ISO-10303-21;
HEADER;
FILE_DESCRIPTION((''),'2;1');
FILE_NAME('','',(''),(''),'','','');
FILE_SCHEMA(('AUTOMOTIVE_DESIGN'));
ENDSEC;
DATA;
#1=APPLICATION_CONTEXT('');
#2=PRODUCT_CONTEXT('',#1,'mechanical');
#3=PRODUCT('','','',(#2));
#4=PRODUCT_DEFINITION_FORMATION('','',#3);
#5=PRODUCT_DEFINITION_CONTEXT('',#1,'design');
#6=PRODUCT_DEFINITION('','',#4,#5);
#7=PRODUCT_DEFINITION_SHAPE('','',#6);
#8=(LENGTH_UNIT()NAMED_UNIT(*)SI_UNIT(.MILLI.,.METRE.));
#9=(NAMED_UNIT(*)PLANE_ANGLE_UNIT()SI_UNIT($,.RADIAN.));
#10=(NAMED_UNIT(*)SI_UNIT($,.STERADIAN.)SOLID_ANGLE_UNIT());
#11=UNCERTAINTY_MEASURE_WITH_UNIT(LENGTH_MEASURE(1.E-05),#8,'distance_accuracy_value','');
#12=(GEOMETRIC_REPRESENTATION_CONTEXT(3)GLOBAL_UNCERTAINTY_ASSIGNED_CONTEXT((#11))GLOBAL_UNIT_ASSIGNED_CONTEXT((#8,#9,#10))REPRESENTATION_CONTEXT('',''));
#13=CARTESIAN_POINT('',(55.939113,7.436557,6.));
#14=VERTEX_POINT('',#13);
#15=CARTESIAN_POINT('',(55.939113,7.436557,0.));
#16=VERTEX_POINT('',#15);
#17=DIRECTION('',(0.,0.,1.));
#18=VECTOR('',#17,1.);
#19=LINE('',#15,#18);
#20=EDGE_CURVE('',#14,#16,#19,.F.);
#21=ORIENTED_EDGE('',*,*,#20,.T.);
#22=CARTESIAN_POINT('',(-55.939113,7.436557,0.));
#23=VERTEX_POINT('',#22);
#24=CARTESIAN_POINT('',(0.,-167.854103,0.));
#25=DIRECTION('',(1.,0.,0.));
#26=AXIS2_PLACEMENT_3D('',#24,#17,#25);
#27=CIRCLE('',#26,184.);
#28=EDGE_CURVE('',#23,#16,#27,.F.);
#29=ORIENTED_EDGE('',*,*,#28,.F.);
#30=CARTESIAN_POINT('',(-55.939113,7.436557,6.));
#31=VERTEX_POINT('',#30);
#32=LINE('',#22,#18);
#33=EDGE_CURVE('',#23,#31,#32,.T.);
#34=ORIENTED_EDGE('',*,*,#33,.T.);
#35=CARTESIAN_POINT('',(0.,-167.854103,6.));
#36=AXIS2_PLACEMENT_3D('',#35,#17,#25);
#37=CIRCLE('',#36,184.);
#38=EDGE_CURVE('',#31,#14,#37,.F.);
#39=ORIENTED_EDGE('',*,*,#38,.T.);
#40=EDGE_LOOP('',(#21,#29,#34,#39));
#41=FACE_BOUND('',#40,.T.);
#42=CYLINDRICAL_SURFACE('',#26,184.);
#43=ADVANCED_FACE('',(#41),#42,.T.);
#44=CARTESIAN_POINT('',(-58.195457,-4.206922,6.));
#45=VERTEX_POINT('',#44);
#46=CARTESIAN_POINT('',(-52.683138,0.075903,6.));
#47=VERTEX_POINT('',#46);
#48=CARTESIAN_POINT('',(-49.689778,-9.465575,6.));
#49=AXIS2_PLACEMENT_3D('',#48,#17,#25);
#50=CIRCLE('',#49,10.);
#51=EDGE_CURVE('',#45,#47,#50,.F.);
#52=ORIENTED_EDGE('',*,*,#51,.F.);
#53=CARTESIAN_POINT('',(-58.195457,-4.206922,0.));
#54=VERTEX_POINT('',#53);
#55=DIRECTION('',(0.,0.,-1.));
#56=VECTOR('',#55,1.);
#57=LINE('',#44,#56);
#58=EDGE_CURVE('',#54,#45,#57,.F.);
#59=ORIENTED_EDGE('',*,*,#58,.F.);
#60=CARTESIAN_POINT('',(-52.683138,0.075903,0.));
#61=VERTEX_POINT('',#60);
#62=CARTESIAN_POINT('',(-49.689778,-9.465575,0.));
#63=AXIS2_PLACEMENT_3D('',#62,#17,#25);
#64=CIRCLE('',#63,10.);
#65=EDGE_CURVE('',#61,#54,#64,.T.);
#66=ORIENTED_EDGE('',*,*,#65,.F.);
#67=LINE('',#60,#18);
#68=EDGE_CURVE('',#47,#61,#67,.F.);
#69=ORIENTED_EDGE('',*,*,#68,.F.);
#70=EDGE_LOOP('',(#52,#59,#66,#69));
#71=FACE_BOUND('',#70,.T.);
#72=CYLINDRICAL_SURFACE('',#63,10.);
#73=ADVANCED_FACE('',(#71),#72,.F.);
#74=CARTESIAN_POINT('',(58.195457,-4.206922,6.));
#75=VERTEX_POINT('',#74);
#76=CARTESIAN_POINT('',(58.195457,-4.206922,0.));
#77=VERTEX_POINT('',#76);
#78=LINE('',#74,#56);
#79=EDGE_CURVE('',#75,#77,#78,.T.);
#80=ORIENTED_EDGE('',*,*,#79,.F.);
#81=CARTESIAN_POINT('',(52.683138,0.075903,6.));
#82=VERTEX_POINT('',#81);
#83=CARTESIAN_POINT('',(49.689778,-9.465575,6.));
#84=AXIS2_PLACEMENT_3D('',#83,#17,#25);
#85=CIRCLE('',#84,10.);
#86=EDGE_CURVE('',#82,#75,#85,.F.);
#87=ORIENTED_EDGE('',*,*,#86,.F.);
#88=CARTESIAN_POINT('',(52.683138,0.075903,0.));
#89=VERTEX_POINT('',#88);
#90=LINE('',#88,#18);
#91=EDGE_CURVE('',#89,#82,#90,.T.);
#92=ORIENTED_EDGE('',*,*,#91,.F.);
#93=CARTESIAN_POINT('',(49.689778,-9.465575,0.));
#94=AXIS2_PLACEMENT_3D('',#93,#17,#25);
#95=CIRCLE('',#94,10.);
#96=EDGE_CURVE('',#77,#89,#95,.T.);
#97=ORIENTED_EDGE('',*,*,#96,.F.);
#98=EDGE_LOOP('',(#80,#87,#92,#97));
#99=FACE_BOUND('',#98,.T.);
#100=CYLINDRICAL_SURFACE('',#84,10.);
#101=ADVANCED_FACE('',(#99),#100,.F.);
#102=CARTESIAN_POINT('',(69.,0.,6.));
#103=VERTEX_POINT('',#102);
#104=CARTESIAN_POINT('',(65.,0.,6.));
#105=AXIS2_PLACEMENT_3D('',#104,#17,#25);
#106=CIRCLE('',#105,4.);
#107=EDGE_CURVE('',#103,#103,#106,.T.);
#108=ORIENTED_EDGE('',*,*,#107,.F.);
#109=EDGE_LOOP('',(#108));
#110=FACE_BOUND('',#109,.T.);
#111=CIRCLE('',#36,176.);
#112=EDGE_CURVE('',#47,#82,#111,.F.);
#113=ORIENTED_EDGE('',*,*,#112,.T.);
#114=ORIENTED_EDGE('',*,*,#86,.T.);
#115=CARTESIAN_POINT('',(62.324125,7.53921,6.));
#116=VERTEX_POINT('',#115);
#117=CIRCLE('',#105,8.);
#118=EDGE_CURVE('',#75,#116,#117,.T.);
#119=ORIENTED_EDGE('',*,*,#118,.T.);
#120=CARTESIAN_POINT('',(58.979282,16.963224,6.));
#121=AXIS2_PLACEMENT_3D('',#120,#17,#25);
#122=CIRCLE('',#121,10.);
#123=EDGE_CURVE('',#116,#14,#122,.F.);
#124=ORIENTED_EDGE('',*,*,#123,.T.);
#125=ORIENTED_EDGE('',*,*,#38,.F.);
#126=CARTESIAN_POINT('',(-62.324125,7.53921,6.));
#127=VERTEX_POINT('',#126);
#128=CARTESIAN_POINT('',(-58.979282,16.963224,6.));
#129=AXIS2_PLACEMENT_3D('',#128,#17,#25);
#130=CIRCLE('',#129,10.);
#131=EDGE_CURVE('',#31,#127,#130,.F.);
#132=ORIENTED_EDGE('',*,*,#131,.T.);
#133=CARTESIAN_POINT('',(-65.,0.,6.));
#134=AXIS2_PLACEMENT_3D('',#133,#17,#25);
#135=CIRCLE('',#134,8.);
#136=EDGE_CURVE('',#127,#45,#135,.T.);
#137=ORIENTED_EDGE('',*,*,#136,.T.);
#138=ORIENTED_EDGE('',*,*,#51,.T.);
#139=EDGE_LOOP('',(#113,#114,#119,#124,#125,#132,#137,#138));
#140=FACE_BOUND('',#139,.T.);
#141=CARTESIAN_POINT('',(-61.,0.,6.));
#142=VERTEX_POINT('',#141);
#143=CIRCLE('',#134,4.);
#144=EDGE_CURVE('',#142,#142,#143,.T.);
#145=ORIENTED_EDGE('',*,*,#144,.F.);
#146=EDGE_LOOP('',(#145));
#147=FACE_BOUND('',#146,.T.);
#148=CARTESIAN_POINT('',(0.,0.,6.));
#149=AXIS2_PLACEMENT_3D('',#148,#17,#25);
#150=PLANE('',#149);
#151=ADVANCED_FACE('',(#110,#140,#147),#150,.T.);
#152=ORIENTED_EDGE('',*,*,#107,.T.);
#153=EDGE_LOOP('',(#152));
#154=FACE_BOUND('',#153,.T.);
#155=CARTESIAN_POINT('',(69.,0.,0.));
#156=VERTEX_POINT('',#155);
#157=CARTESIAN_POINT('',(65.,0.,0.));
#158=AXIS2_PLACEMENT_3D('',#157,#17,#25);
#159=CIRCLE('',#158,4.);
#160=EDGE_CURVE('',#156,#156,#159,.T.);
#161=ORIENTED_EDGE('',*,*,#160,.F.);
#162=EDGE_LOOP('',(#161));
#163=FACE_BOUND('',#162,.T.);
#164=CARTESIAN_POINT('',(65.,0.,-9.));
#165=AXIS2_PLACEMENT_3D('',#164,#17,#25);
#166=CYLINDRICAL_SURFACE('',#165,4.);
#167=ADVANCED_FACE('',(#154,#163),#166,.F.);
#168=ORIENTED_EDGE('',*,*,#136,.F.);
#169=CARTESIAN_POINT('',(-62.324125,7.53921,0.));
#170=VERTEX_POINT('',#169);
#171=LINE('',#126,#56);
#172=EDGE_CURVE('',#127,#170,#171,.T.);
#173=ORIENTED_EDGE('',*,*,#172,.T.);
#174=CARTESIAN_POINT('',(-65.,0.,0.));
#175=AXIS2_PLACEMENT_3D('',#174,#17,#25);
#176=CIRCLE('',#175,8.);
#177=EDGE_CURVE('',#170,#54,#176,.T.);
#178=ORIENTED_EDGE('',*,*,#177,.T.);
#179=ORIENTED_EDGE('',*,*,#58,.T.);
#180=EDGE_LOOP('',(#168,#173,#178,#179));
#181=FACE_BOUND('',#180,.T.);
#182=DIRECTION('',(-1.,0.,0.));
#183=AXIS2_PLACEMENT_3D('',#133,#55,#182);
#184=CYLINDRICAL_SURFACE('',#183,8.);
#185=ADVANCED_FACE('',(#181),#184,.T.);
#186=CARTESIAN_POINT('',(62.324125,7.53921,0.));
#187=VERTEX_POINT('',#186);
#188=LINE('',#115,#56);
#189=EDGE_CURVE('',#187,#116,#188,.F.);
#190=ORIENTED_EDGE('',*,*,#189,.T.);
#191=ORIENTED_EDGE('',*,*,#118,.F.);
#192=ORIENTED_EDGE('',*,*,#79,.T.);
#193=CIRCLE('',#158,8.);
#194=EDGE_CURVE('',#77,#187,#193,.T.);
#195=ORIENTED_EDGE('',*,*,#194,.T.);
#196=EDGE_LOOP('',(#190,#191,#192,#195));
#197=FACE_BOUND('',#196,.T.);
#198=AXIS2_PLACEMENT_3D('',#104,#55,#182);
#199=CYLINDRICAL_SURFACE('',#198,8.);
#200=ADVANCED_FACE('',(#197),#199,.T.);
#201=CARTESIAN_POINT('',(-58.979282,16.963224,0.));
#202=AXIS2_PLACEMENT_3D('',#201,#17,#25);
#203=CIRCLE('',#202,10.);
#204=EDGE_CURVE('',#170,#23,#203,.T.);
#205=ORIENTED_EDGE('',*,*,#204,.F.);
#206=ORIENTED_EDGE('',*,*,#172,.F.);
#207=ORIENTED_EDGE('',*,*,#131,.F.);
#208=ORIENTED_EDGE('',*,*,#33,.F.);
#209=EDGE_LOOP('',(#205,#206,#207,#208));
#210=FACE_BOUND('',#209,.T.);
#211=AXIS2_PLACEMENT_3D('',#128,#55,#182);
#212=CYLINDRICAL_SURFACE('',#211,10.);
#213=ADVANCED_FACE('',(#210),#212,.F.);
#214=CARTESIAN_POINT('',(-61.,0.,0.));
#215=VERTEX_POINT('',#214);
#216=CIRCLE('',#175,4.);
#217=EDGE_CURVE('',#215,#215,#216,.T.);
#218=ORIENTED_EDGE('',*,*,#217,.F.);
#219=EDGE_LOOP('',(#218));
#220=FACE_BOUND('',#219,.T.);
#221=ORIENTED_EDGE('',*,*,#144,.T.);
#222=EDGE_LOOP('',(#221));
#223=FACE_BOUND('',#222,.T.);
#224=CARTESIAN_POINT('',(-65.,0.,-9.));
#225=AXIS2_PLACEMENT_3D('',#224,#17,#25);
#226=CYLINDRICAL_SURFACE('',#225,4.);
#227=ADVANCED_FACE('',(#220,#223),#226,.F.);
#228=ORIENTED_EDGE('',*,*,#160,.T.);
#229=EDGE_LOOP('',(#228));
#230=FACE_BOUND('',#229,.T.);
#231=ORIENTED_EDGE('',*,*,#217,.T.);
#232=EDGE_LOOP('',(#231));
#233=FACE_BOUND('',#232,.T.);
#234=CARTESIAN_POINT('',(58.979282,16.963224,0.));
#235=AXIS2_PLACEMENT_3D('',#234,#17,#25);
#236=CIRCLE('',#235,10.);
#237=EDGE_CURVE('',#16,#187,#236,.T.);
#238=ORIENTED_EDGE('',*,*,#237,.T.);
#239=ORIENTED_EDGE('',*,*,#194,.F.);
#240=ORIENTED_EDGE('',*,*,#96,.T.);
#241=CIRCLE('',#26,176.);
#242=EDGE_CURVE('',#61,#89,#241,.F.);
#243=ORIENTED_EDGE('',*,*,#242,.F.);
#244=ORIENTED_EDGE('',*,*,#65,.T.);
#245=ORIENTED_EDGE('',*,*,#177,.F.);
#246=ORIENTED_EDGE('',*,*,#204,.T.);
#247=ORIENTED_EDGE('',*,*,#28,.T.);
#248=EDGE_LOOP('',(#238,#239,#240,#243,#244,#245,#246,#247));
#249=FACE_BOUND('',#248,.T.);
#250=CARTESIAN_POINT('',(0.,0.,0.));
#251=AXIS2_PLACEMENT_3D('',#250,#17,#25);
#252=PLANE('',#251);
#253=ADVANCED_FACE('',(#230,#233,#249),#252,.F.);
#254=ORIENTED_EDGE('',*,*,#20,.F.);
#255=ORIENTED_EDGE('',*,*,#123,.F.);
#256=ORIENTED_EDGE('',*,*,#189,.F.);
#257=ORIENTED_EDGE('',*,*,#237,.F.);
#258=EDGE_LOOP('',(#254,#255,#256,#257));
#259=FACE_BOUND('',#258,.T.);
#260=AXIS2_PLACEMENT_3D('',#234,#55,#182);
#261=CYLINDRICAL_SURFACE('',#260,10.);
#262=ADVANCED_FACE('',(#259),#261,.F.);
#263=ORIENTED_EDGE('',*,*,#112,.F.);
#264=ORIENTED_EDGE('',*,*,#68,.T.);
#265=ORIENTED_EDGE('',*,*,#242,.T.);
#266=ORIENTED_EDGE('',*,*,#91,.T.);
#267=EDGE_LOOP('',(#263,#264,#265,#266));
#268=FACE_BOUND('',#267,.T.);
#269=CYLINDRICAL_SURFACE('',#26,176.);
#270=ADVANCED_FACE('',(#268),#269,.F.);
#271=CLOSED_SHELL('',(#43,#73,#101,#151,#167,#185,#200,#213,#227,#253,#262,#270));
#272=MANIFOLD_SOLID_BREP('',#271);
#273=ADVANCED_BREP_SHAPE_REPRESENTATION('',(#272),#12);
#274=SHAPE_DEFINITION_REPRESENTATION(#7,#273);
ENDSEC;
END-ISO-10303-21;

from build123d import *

# Parameters (mm, degrees)
SKETCH_1_R          = 8
EXTRUDE_1_DEPTH     = 6
SKETCH_2_R          = 4
CUT_EXTRUDE_1_DEPTH = 15
FILLET_1_R          = 10
EXTRUDE_START       = -6
EXTRUDE_3_DEPTH     = 6
CUT_EXTRUDE_START   = -6
CUT_EXTRUDE_2_DEPTH = 6
FILLET_2_R          = 10


with BuildPart() as part:
    # 草图1 → 凸台-拉伸1 (new body)
    with BuildSketch(Plane.XY):
        with Locations((-65, 0)):
            Circle(SKETCH_1_R)
        with Locations((65, 0)):
            Circle(SKETCH_1_R)
        with BuildLine():
            Line((-65, 4), (65, 4))
            ThreePointArc((65, 4), (69, 0), (65, -4))
            Line((65, -4), (-65, -4))
            ThreePointArc((-65, -4), (-69, 0), (-65, 4))
        make_face()
    extrude(amount=EXTRUDE_1_DEPTH)

    # 草图2 → 切除-拉伸1 (cut)
    with BuildSketch(Plane.XY.offset(6)):
        with Locations((-65, 0)):
            Circle(SKETCH_2_R)
        with Locations((65, 0)):
            Circle(SKETCH_2_R)
    extrude(amount=-CUT_EXTRUDE_1_DEPTH, mode=Mode.SUBTRACT)

    # 圆角1
    fillet_1_edges = [part.edges().sort_by_distance(p)[0] for p in [
        (58.07179677, -4, 3),
        (-58.07179677, -4, 3),
        (-58.07179677, 4, 3),
        (58.07179677, 4, 3),
    ]]
    fillet(fillet_1_edges, radius=FILLET_1_R)

    # 草图4 → 凸台-拉伸3 (add)
    with BuildSketch(Plane.XY.offset(6).offset(EXTRUDE_START)):
        with BuildLine():
            ThreePointArc((53.536596581, 4), (0, 12.145896684), (-53.536596581, 4))
            Line((-53.536596581, 4), (-37.975876204, 4))
            ThreePointArc((-37.975876204, 4), (0, 8.145896684), (37.975876204, 4))
            Line((37.975876204, 4), (53.536596581, 4))
        make_face()
        with BuildLine():
            ThreePointArc((59.862982118, 6.135618714), (0, 16.145896684), (-59.862982118, 6.135618714))
            ThreePointArc((-59.862982118, 6.135618714), (-56.954026736, 4.54897326), (-53.686291501, 4))
            Line((-53.686291501, 4), (-53.536596581, 4))
            ThreePointArc((-53.536596581, 4), (0, 12.145896684), (53.536596581, 4))
            Line((53.536596581, 4), (53.686291501, 4))
            ThreePointArc((53.686291501, 4), (56.954026736, 4.54897326), (59.862982118, 6.135618714))
        make_face()
    extrude(amount=EXTRUDE_3_DEPTH)

    # 草图5 → 切除-拉伸2 (cut)
    with BuildSketch(Plane.XY.offset(6).offset(CUT_EXTRUDE_START)):
        with BuildLine():
            ThreePointArc((-59.971685112, -6.222222222), (-57.019624834, -4.571909584), (-53.686291501, -4))
            Line((-53.686291501, -4), (53.686291501, -4))
            ThreePointArc((53.686291501, -4), (57.019624834, -4.571909584), (59.971685112, -6.222222222))
            ThreePointArc((59.971685112, -6.222222222), (58.106897, -4.060188546), (57.120098961, -1.380999498))
            ThreePointArc((57.120098961, -1.380999498), (47.624047624, 1.580102463), (37.975876204, 4))
            Line((37.975876204, 4), (-37.975876204, 4))
            ThreePointArc((-37.975876204, 4), (-47.624047624, 1.580102463), (-57.120098961, -1.380999498))
            ThreePointArc((-57.120098961, -1.380999498), (-58.106897, -4.060188546), (-59.971685112, -6.222222222))
        make_face()
    extrude(amount=CUT_EXTRUDE_2_DEPTH, mode=Mode.SUBTRACT)

    # 圆角2
    fillet_2_edges = [part.edges().sort_by_distance(p)[0] for p in [
        (-57.120098961, -1.380999498, 3),
    ]]
    fillet(fillet_2_edges, radius=FILLET_2_R)
    fillet_2_2_edges = [part.edges().sort_by_distance(p)[0] for p in [
        (59.862982118, 6.135618714, 3),
    ]]
    fillet(fillet_2_2_edges, radius=FILLET_2_R)
    fillet_2_3_edges = [part.edges().sort_by_distance(p)[0] for p in [
        (57.120098961, -1.380999498, 3),
    ]]
    fillet(fillet_2_3_edges, radius=FILLET_2_R)
    fillet_2_4_edges = [part.edges().sort_by_distance(p)[0] for p in [
        (-59.862982118, 6.135618714, 3),
    ]]
    fillet(fillet_2_4_edges, radius=FILLET_2_R)


solid = part.part
